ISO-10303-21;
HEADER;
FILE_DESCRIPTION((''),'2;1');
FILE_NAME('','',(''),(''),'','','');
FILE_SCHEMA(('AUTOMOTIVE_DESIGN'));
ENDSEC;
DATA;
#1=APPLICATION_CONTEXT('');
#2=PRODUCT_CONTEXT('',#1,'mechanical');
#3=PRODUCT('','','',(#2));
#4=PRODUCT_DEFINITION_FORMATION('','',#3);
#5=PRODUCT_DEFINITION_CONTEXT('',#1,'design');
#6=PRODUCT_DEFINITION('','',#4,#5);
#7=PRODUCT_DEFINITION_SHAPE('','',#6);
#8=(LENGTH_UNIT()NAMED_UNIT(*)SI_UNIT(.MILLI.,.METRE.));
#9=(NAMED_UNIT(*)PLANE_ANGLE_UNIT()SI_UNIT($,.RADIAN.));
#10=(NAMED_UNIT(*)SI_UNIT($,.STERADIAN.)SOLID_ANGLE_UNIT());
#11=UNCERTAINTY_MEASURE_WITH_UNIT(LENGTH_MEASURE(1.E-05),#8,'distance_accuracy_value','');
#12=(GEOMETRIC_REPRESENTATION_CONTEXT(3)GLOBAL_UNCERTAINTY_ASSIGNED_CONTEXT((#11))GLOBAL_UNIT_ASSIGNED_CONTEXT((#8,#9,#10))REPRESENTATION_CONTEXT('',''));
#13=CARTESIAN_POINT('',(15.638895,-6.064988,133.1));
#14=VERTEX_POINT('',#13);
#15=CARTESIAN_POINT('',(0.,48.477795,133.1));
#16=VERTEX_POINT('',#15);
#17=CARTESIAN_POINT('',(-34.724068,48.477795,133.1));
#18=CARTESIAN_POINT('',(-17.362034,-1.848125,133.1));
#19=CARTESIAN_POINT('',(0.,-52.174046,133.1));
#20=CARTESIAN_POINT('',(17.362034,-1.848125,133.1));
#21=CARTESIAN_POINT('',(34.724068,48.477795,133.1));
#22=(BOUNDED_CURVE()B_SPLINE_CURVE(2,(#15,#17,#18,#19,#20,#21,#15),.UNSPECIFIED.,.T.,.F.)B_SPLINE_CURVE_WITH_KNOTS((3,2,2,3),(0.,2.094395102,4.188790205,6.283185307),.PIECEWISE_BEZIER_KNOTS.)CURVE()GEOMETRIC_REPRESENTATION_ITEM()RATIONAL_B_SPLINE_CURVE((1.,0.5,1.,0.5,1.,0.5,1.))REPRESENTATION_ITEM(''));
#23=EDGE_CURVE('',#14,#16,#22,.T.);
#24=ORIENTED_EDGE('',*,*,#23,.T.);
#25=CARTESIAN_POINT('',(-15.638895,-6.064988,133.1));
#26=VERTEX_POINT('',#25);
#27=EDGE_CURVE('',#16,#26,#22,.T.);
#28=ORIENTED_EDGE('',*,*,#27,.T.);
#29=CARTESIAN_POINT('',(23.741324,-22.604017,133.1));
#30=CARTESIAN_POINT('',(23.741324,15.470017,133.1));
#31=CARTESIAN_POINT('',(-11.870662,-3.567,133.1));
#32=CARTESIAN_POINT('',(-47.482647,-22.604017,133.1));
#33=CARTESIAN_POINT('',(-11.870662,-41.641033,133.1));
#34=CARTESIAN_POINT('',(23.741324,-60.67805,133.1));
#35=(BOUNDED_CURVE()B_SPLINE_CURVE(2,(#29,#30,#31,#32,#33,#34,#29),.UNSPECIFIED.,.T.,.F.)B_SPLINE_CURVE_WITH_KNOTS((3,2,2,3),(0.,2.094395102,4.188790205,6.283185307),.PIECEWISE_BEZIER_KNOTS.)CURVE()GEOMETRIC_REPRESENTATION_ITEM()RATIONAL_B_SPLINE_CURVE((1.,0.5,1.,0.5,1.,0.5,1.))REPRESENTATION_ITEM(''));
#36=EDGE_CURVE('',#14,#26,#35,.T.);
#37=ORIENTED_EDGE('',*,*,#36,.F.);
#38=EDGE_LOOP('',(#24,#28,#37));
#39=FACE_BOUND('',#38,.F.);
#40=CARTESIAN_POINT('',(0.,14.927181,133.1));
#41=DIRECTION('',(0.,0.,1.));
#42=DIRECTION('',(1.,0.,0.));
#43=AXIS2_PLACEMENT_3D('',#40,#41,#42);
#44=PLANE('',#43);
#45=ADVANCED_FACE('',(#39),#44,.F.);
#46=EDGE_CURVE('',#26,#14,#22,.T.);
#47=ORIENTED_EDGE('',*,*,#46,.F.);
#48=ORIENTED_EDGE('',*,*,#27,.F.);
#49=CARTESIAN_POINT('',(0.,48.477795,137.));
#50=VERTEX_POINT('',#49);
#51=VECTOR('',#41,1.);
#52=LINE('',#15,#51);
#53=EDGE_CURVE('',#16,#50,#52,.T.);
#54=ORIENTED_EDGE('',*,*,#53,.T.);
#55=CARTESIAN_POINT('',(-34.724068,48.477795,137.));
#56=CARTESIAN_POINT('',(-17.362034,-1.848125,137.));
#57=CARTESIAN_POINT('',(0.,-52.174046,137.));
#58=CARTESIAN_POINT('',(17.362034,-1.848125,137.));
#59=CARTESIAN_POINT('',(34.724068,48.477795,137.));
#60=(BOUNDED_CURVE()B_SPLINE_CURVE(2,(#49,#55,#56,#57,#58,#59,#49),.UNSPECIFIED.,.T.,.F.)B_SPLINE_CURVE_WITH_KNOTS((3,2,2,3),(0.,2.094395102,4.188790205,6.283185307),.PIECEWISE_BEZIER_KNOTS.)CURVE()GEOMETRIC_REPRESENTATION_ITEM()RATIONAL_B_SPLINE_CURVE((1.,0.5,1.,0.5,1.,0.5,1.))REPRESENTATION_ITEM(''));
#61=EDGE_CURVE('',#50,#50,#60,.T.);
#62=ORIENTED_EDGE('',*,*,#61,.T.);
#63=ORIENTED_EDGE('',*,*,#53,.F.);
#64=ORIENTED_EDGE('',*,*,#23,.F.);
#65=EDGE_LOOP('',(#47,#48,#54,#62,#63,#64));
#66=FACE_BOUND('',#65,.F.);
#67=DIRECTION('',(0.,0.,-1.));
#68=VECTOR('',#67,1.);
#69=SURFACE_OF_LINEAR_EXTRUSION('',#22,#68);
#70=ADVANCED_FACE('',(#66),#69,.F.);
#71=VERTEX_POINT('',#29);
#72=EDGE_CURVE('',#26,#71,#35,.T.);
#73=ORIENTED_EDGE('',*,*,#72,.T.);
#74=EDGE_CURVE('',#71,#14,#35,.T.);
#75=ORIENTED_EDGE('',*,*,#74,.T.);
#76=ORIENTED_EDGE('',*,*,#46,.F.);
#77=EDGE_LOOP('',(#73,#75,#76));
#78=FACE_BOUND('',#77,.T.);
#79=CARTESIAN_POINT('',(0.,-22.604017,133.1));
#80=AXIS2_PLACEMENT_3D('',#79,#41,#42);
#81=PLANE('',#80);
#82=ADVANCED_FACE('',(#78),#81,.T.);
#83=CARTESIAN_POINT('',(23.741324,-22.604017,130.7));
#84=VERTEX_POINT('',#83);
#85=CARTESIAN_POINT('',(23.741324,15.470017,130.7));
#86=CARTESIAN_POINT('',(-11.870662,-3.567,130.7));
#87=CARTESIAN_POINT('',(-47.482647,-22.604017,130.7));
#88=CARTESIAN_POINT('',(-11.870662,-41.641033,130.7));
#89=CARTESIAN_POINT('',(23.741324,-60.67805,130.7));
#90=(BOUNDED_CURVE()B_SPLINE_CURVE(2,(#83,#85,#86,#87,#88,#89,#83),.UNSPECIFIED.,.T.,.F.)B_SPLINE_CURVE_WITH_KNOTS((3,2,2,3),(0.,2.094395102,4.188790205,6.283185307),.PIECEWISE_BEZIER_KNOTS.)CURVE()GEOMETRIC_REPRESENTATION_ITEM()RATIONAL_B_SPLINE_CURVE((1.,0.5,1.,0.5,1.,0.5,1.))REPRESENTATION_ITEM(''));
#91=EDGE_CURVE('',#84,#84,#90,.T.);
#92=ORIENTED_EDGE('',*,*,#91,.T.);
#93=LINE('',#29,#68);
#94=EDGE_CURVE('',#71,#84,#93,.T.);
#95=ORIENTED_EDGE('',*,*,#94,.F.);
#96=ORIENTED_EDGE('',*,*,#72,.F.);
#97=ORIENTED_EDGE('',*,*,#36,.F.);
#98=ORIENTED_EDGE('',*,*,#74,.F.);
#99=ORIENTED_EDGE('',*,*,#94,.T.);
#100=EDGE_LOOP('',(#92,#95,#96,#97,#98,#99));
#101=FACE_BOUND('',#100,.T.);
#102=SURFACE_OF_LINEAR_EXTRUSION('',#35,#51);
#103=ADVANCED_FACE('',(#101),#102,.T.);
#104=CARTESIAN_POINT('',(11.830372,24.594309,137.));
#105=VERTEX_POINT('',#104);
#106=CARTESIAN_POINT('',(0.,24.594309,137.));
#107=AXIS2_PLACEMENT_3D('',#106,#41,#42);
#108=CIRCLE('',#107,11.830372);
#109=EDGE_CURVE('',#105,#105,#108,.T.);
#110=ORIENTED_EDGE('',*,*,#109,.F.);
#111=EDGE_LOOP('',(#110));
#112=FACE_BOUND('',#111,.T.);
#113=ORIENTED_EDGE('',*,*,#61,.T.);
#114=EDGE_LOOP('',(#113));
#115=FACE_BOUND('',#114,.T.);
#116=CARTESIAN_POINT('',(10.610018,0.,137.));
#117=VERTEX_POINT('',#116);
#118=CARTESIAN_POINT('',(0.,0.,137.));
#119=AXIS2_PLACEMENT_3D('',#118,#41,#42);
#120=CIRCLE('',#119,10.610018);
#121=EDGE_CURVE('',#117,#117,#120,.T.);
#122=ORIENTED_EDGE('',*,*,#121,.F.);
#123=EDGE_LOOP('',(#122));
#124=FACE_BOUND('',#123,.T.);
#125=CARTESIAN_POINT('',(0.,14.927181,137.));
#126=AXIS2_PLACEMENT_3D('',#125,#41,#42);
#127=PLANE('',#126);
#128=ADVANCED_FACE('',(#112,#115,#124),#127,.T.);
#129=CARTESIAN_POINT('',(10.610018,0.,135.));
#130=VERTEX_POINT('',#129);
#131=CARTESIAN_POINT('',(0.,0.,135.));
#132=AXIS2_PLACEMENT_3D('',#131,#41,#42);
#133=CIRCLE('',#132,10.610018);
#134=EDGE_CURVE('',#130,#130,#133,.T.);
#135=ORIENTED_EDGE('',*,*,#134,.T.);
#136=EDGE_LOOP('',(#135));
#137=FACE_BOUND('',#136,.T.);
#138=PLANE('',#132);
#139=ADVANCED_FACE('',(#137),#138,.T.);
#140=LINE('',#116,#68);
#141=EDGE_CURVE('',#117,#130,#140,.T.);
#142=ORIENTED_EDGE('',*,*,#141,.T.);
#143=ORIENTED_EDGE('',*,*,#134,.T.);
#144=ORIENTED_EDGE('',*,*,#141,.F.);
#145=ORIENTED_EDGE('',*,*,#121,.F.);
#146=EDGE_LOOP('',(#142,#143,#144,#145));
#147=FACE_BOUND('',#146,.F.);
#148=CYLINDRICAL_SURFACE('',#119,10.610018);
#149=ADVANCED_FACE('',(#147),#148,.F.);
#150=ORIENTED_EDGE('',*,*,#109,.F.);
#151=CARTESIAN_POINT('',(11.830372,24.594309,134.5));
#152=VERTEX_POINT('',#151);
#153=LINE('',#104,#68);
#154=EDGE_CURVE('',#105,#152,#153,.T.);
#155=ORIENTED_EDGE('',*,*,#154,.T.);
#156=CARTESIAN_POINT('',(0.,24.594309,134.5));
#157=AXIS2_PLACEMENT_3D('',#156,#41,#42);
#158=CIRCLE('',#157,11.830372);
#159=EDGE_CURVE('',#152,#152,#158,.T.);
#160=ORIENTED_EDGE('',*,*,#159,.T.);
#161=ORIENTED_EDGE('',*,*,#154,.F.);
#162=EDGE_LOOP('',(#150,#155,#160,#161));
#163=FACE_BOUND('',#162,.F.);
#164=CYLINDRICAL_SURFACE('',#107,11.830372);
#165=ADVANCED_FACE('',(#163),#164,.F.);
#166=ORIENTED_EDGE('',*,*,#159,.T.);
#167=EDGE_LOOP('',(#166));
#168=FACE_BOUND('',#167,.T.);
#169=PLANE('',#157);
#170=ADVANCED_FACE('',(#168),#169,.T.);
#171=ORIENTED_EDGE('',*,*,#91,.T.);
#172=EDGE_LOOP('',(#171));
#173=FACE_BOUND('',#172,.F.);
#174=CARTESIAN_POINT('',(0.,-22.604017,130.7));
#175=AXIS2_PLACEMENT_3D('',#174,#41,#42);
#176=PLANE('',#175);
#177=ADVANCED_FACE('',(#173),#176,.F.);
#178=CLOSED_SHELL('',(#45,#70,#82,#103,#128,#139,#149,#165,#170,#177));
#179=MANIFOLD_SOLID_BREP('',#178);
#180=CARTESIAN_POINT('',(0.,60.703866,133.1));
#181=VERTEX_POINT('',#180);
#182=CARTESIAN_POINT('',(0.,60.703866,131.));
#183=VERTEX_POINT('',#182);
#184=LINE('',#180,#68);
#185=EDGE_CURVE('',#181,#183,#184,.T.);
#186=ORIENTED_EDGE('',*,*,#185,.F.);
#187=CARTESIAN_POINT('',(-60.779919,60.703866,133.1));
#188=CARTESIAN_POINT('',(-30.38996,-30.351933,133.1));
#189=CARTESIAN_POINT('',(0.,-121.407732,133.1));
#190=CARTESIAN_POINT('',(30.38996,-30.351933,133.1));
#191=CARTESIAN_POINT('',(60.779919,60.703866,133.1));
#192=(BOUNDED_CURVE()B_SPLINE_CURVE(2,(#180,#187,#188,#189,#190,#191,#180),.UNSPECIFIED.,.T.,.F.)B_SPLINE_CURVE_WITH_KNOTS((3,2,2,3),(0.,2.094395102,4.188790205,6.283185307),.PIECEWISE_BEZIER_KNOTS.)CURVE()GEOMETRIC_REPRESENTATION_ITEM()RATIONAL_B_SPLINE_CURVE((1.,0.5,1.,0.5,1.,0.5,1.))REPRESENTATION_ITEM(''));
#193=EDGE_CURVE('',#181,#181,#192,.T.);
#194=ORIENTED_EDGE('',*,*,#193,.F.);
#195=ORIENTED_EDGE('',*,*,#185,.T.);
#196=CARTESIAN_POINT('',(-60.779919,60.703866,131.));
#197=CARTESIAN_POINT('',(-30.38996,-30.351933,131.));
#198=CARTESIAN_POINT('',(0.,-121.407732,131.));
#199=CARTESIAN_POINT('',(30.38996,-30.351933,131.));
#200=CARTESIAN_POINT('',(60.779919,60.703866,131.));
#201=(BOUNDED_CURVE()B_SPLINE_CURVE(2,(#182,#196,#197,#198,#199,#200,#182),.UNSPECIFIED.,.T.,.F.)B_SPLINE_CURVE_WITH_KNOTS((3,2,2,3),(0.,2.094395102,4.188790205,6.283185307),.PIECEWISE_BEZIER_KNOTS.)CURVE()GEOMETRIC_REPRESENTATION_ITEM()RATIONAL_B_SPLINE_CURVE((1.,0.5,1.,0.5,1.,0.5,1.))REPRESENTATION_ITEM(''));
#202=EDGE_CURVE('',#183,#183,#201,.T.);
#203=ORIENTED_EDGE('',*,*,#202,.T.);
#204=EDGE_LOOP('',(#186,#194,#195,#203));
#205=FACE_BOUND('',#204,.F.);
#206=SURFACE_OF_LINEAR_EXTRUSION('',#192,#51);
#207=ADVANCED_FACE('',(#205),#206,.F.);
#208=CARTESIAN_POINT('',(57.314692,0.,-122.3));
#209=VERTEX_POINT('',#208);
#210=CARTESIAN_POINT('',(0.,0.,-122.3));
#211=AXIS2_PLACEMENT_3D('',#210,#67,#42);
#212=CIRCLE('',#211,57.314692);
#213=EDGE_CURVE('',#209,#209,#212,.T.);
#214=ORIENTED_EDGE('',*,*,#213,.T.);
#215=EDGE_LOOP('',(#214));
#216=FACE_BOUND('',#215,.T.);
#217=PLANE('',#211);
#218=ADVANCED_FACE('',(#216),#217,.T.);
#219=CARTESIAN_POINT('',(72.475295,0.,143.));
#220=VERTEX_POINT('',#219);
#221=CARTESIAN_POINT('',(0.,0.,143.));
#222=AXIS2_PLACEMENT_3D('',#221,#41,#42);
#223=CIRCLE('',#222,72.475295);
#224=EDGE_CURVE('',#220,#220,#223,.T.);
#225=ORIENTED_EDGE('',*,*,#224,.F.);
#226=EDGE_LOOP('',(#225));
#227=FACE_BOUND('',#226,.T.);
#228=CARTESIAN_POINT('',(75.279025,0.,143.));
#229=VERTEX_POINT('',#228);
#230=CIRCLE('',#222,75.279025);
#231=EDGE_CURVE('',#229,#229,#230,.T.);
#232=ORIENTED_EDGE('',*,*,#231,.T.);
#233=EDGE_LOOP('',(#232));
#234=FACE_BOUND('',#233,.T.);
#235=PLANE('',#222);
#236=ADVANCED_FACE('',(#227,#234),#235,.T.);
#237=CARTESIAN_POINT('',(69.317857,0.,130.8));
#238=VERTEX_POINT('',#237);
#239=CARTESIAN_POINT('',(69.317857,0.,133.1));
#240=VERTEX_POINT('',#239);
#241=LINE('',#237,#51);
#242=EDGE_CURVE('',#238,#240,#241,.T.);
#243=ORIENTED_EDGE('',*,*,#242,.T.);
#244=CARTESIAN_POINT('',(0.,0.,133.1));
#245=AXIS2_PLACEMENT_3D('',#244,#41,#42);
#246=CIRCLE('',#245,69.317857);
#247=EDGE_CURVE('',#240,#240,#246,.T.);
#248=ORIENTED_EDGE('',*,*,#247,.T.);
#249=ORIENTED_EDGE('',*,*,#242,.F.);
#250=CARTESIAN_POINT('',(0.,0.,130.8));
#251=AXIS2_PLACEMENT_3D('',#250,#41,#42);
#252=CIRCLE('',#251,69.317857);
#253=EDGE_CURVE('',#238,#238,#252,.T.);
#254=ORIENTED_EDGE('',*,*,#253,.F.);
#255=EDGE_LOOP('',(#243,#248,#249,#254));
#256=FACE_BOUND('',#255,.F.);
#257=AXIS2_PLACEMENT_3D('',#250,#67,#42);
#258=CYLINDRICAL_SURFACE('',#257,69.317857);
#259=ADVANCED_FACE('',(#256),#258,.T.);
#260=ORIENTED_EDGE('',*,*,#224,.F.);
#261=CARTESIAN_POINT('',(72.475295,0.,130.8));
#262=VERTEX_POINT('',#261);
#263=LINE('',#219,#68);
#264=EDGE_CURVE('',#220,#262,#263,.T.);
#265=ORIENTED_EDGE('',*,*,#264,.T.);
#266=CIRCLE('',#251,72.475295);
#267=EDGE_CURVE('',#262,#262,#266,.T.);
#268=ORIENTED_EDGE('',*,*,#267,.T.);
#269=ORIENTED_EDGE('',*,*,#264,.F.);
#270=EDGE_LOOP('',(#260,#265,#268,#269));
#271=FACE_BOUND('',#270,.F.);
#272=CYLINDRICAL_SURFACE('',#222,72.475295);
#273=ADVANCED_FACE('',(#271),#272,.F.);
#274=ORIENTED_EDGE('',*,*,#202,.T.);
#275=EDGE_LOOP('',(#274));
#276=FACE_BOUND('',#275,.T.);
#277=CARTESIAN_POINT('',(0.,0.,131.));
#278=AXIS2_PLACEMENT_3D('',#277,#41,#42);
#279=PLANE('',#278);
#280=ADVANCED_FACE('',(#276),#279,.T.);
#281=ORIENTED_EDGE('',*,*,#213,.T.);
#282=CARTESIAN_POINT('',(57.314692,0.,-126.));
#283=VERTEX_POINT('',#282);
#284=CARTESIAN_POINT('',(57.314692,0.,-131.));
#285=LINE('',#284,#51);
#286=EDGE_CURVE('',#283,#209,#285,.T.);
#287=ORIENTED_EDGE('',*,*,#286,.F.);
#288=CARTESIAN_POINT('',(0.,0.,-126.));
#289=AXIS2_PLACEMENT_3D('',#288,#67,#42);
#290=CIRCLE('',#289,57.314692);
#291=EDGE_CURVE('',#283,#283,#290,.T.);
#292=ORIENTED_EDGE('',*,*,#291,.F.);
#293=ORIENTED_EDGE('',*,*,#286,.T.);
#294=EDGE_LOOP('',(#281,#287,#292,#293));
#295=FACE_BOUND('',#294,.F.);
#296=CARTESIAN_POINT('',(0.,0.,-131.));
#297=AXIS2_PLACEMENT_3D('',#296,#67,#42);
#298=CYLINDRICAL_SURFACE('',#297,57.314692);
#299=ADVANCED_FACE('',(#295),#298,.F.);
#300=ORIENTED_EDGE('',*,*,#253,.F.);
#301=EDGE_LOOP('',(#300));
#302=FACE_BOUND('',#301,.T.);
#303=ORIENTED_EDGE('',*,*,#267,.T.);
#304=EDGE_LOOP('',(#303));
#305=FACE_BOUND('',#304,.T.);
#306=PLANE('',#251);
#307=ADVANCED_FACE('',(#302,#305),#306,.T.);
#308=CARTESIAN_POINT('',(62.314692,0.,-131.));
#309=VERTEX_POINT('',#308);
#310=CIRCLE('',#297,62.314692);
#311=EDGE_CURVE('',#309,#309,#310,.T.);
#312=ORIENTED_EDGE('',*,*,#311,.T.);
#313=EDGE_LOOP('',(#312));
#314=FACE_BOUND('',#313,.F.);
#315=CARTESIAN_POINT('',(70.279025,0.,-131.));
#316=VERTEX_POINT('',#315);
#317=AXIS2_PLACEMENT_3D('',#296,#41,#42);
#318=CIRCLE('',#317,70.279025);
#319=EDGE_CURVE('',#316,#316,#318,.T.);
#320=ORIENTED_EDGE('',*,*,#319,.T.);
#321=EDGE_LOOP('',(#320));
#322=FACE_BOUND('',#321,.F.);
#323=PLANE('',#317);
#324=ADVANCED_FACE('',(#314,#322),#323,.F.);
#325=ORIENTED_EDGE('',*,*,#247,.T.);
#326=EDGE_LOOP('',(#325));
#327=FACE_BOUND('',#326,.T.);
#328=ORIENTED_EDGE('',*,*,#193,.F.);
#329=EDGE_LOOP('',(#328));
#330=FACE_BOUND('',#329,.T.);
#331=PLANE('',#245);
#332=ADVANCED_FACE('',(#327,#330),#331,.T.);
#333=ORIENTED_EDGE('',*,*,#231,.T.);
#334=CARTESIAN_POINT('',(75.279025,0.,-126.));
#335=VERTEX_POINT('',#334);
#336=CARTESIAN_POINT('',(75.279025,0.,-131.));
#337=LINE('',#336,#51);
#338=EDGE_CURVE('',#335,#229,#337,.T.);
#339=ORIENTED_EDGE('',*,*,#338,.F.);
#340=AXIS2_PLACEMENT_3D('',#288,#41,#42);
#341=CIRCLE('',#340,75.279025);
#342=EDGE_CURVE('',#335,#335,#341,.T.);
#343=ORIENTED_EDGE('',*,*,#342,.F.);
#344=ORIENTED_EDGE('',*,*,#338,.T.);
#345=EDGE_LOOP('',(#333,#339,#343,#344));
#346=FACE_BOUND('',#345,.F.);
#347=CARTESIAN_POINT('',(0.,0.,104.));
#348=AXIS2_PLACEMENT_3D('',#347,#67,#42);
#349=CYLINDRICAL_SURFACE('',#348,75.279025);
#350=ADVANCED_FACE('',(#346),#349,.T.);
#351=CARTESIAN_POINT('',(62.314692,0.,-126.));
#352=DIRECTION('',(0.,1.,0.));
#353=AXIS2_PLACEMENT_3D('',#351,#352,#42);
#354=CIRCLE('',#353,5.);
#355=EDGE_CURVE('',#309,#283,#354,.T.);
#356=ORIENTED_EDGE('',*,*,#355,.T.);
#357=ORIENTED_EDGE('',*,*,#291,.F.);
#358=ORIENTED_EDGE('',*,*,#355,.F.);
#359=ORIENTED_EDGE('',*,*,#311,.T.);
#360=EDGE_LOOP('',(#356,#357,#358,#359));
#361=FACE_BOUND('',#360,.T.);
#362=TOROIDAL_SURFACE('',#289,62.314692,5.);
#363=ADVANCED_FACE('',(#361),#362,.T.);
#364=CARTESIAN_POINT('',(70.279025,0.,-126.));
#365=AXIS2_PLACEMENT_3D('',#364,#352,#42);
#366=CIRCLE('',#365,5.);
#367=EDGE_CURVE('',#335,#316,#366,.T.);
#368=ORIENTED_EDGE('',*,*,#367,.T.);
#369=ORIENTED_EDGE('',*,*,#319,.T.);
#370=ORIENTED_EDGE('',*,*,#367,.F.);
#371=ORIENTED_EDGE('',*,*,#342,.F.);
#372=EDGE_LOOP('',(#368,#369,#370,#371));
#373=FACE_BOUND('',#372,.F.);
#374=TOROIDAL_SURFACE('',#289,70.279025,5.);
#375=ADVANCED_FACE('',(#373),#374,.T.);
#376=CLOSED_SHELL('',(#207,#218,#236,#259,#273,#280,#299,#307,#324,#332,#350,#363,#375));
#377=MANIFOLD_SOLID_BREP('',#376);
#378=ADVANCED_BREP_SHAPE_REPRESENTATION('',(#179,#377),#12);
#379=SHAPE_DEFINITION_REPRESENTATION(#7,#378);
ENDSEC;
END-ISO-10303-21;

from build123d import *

# Parameters (mm, degrees)
F0_R      = 75.279024749
F1_DEPTH  = 104
F2_DEPTH  = 131
F3_DEPTH  = 39
F4_R      = 72.4752953546
F5_DEPTH  = 12.2
F6_R      = 69.3178574883
F7_DEPTH  = 2.3
F10_DEPTH = 2.1
F12_DEPTH = 3.9
F14_DEPTH = 2.4
F15_R     = 11.830371828
F16_DEPTH = 2.5
F15_R_2   = 10.6100179521
F17_DEPTH = 2
F18_R     = 57.314692
F19_DEPTH = 8.7
F20_R     = 5


with BuildPart() as f1:
    # F0 (on Top) → F1 (new body)
    with BuildSketch(Plane.XY):
        Circle(F0_R)
    extrude(amount=F1_DEPTH)

    # F2 (add): a face of the model
    f2_faces = [f1.faces().sort_by_distance(p)[0] for p in [
        (0, 0, 0),
    ]]
    extrude(f2_faces, amount=F2_DEPTH)

    # F3 (add): a face of the model
    f3_faces = [f1.faces().sort_by_distance(p)[0] for p in [
        (0, 0, 104),
    ]]
    extrude(f3_faces, amount=F3_DEPTH)

    # F4 (on face) → F5 (cut)
    with BuildSketch(Plane.XY.offset(143)):
        Circle(F4_R)
    extrude(amount=-F5_DEPTH, mode=Mode.SUBTRACT)

    # F6 (on face) → F7 (join)
    with BuildSketch(Plane.XY.offset(130.8)):
        Circle(F6_R)
    extrude(amount=F7_DEPTH)

    # F9 (on face) → F10 (cut)
    with BuildSketch(Plane.XY.offset(133.1)):
        with BuildLine():
            add(Edge.make_bspline(
                [(0, 60.7038661838), (-60.7799193233, 60.7038661838), (-30.3899596616, -30.3519330919), (0, -121.4077323675), (30.3899596616, -30.3519330919), (60.7799193233, 60.7038661838), (0, 60.7038661838)],
                knots=[0, 0, 0, 2.0943951024, 2.0943951024, 4.1887902048, 4.1887902048, 6.2831853072, 6.2831853072, 6.2831853072], degree=2, weights=[1, 0.5, 1, 0.5, 1, 0.5, 1]))
        make_face()
    extrude(amount=-F10_DEPTH, mode=Mode.SUBTRACT)

    # F18 (on face) → F19 (cut)
    with BuildSketch(Plane(origin=(0, 0, -131), x_dir=(1, 0, 0), z_dir=(0, 0, -1))):
        Circle(F18_R)
    extrude(amount=-F19_DEPTH, mode=Mode.SUBTRACT)

    # F20
    f20_edges = [f1.edges().sort_by_distance(p)[0] for p in [
        (-75.279025, 0, -131),
        (-57.314692, 0, -131),
    ]]
    fillet(f20_edges, radius=F20_R)


with BuildPart() as f12:
    # F11 (on face) → F12 (new body)
    with BuildSketch(Plane.XY.offset(133.1)):
        with BuildLine():
            add(Edge.make_bspline(
                [(0, 48.477794975), (-34.7240676564, 48.477794975), (-17.3620338282, -1.8481253646), (0, -52.1740457043), (17.3620338282, -1.8481253646), (34.7240676564, 48.477794975), (0, 48.477794975)],
                knots=[0, 0, 0, 2.0943951024, 2.0943951024, 4.1887902048, 4.1887902048, 6.2831853072, 6.2831853072, 6.2831853072], degree=2, weights=[1, 0.5, 1, 0.5, 1, 0.5, 1]))
        make_face()
    extrude(amount=F12_DEPTH)

    # F13 (on face) → F14 (join)
    with BuildSketch(Plane.XY.offset(133.1)):
        with BuildLine():
            add(Edge.make_bspline(
                [(23.7413235009, -22.6040165871), (23.7413235009, 15.470016879), (-11.8706617504, -3.5669998541), (-47.4826470017, -22.6040165871), (-11.8706617504, -41.6410333202), (23.7413235009, -60.6780500532), (23.7413235009, -22.6040165871)],
                knots=[0, 0, 0, 2.0943951024, 2.0943951024, 4.1887902048, 4.1887902048, 6.2831853072, 6.2831853072, 6.2831853072], degree=2, weights=[1, 0.5, 1, 0.5, 1, 0.5, 1]))
        make_face()
    extrude(amount=-F14_DEPTH)

    # F15 (on face) → F16 (cut)
    with BuildSketch(Plane.XY.offset(137)):
        with Locations((0, 24.5943088084)):
            Circle(F15_R)
    extrude(amount=-F16_DEPTH, mode=Mode.SUBTRACT)

    # F15 (on face) → F17 (cut)
    with BuildSketch(Plane.XY.offset(137)):
        Circle(F15_R_2)
    extrude(amount=-F17_DEPTH, mode=Mode.SUBTRACT)


solid = Compound([f1.part, f12.part])
